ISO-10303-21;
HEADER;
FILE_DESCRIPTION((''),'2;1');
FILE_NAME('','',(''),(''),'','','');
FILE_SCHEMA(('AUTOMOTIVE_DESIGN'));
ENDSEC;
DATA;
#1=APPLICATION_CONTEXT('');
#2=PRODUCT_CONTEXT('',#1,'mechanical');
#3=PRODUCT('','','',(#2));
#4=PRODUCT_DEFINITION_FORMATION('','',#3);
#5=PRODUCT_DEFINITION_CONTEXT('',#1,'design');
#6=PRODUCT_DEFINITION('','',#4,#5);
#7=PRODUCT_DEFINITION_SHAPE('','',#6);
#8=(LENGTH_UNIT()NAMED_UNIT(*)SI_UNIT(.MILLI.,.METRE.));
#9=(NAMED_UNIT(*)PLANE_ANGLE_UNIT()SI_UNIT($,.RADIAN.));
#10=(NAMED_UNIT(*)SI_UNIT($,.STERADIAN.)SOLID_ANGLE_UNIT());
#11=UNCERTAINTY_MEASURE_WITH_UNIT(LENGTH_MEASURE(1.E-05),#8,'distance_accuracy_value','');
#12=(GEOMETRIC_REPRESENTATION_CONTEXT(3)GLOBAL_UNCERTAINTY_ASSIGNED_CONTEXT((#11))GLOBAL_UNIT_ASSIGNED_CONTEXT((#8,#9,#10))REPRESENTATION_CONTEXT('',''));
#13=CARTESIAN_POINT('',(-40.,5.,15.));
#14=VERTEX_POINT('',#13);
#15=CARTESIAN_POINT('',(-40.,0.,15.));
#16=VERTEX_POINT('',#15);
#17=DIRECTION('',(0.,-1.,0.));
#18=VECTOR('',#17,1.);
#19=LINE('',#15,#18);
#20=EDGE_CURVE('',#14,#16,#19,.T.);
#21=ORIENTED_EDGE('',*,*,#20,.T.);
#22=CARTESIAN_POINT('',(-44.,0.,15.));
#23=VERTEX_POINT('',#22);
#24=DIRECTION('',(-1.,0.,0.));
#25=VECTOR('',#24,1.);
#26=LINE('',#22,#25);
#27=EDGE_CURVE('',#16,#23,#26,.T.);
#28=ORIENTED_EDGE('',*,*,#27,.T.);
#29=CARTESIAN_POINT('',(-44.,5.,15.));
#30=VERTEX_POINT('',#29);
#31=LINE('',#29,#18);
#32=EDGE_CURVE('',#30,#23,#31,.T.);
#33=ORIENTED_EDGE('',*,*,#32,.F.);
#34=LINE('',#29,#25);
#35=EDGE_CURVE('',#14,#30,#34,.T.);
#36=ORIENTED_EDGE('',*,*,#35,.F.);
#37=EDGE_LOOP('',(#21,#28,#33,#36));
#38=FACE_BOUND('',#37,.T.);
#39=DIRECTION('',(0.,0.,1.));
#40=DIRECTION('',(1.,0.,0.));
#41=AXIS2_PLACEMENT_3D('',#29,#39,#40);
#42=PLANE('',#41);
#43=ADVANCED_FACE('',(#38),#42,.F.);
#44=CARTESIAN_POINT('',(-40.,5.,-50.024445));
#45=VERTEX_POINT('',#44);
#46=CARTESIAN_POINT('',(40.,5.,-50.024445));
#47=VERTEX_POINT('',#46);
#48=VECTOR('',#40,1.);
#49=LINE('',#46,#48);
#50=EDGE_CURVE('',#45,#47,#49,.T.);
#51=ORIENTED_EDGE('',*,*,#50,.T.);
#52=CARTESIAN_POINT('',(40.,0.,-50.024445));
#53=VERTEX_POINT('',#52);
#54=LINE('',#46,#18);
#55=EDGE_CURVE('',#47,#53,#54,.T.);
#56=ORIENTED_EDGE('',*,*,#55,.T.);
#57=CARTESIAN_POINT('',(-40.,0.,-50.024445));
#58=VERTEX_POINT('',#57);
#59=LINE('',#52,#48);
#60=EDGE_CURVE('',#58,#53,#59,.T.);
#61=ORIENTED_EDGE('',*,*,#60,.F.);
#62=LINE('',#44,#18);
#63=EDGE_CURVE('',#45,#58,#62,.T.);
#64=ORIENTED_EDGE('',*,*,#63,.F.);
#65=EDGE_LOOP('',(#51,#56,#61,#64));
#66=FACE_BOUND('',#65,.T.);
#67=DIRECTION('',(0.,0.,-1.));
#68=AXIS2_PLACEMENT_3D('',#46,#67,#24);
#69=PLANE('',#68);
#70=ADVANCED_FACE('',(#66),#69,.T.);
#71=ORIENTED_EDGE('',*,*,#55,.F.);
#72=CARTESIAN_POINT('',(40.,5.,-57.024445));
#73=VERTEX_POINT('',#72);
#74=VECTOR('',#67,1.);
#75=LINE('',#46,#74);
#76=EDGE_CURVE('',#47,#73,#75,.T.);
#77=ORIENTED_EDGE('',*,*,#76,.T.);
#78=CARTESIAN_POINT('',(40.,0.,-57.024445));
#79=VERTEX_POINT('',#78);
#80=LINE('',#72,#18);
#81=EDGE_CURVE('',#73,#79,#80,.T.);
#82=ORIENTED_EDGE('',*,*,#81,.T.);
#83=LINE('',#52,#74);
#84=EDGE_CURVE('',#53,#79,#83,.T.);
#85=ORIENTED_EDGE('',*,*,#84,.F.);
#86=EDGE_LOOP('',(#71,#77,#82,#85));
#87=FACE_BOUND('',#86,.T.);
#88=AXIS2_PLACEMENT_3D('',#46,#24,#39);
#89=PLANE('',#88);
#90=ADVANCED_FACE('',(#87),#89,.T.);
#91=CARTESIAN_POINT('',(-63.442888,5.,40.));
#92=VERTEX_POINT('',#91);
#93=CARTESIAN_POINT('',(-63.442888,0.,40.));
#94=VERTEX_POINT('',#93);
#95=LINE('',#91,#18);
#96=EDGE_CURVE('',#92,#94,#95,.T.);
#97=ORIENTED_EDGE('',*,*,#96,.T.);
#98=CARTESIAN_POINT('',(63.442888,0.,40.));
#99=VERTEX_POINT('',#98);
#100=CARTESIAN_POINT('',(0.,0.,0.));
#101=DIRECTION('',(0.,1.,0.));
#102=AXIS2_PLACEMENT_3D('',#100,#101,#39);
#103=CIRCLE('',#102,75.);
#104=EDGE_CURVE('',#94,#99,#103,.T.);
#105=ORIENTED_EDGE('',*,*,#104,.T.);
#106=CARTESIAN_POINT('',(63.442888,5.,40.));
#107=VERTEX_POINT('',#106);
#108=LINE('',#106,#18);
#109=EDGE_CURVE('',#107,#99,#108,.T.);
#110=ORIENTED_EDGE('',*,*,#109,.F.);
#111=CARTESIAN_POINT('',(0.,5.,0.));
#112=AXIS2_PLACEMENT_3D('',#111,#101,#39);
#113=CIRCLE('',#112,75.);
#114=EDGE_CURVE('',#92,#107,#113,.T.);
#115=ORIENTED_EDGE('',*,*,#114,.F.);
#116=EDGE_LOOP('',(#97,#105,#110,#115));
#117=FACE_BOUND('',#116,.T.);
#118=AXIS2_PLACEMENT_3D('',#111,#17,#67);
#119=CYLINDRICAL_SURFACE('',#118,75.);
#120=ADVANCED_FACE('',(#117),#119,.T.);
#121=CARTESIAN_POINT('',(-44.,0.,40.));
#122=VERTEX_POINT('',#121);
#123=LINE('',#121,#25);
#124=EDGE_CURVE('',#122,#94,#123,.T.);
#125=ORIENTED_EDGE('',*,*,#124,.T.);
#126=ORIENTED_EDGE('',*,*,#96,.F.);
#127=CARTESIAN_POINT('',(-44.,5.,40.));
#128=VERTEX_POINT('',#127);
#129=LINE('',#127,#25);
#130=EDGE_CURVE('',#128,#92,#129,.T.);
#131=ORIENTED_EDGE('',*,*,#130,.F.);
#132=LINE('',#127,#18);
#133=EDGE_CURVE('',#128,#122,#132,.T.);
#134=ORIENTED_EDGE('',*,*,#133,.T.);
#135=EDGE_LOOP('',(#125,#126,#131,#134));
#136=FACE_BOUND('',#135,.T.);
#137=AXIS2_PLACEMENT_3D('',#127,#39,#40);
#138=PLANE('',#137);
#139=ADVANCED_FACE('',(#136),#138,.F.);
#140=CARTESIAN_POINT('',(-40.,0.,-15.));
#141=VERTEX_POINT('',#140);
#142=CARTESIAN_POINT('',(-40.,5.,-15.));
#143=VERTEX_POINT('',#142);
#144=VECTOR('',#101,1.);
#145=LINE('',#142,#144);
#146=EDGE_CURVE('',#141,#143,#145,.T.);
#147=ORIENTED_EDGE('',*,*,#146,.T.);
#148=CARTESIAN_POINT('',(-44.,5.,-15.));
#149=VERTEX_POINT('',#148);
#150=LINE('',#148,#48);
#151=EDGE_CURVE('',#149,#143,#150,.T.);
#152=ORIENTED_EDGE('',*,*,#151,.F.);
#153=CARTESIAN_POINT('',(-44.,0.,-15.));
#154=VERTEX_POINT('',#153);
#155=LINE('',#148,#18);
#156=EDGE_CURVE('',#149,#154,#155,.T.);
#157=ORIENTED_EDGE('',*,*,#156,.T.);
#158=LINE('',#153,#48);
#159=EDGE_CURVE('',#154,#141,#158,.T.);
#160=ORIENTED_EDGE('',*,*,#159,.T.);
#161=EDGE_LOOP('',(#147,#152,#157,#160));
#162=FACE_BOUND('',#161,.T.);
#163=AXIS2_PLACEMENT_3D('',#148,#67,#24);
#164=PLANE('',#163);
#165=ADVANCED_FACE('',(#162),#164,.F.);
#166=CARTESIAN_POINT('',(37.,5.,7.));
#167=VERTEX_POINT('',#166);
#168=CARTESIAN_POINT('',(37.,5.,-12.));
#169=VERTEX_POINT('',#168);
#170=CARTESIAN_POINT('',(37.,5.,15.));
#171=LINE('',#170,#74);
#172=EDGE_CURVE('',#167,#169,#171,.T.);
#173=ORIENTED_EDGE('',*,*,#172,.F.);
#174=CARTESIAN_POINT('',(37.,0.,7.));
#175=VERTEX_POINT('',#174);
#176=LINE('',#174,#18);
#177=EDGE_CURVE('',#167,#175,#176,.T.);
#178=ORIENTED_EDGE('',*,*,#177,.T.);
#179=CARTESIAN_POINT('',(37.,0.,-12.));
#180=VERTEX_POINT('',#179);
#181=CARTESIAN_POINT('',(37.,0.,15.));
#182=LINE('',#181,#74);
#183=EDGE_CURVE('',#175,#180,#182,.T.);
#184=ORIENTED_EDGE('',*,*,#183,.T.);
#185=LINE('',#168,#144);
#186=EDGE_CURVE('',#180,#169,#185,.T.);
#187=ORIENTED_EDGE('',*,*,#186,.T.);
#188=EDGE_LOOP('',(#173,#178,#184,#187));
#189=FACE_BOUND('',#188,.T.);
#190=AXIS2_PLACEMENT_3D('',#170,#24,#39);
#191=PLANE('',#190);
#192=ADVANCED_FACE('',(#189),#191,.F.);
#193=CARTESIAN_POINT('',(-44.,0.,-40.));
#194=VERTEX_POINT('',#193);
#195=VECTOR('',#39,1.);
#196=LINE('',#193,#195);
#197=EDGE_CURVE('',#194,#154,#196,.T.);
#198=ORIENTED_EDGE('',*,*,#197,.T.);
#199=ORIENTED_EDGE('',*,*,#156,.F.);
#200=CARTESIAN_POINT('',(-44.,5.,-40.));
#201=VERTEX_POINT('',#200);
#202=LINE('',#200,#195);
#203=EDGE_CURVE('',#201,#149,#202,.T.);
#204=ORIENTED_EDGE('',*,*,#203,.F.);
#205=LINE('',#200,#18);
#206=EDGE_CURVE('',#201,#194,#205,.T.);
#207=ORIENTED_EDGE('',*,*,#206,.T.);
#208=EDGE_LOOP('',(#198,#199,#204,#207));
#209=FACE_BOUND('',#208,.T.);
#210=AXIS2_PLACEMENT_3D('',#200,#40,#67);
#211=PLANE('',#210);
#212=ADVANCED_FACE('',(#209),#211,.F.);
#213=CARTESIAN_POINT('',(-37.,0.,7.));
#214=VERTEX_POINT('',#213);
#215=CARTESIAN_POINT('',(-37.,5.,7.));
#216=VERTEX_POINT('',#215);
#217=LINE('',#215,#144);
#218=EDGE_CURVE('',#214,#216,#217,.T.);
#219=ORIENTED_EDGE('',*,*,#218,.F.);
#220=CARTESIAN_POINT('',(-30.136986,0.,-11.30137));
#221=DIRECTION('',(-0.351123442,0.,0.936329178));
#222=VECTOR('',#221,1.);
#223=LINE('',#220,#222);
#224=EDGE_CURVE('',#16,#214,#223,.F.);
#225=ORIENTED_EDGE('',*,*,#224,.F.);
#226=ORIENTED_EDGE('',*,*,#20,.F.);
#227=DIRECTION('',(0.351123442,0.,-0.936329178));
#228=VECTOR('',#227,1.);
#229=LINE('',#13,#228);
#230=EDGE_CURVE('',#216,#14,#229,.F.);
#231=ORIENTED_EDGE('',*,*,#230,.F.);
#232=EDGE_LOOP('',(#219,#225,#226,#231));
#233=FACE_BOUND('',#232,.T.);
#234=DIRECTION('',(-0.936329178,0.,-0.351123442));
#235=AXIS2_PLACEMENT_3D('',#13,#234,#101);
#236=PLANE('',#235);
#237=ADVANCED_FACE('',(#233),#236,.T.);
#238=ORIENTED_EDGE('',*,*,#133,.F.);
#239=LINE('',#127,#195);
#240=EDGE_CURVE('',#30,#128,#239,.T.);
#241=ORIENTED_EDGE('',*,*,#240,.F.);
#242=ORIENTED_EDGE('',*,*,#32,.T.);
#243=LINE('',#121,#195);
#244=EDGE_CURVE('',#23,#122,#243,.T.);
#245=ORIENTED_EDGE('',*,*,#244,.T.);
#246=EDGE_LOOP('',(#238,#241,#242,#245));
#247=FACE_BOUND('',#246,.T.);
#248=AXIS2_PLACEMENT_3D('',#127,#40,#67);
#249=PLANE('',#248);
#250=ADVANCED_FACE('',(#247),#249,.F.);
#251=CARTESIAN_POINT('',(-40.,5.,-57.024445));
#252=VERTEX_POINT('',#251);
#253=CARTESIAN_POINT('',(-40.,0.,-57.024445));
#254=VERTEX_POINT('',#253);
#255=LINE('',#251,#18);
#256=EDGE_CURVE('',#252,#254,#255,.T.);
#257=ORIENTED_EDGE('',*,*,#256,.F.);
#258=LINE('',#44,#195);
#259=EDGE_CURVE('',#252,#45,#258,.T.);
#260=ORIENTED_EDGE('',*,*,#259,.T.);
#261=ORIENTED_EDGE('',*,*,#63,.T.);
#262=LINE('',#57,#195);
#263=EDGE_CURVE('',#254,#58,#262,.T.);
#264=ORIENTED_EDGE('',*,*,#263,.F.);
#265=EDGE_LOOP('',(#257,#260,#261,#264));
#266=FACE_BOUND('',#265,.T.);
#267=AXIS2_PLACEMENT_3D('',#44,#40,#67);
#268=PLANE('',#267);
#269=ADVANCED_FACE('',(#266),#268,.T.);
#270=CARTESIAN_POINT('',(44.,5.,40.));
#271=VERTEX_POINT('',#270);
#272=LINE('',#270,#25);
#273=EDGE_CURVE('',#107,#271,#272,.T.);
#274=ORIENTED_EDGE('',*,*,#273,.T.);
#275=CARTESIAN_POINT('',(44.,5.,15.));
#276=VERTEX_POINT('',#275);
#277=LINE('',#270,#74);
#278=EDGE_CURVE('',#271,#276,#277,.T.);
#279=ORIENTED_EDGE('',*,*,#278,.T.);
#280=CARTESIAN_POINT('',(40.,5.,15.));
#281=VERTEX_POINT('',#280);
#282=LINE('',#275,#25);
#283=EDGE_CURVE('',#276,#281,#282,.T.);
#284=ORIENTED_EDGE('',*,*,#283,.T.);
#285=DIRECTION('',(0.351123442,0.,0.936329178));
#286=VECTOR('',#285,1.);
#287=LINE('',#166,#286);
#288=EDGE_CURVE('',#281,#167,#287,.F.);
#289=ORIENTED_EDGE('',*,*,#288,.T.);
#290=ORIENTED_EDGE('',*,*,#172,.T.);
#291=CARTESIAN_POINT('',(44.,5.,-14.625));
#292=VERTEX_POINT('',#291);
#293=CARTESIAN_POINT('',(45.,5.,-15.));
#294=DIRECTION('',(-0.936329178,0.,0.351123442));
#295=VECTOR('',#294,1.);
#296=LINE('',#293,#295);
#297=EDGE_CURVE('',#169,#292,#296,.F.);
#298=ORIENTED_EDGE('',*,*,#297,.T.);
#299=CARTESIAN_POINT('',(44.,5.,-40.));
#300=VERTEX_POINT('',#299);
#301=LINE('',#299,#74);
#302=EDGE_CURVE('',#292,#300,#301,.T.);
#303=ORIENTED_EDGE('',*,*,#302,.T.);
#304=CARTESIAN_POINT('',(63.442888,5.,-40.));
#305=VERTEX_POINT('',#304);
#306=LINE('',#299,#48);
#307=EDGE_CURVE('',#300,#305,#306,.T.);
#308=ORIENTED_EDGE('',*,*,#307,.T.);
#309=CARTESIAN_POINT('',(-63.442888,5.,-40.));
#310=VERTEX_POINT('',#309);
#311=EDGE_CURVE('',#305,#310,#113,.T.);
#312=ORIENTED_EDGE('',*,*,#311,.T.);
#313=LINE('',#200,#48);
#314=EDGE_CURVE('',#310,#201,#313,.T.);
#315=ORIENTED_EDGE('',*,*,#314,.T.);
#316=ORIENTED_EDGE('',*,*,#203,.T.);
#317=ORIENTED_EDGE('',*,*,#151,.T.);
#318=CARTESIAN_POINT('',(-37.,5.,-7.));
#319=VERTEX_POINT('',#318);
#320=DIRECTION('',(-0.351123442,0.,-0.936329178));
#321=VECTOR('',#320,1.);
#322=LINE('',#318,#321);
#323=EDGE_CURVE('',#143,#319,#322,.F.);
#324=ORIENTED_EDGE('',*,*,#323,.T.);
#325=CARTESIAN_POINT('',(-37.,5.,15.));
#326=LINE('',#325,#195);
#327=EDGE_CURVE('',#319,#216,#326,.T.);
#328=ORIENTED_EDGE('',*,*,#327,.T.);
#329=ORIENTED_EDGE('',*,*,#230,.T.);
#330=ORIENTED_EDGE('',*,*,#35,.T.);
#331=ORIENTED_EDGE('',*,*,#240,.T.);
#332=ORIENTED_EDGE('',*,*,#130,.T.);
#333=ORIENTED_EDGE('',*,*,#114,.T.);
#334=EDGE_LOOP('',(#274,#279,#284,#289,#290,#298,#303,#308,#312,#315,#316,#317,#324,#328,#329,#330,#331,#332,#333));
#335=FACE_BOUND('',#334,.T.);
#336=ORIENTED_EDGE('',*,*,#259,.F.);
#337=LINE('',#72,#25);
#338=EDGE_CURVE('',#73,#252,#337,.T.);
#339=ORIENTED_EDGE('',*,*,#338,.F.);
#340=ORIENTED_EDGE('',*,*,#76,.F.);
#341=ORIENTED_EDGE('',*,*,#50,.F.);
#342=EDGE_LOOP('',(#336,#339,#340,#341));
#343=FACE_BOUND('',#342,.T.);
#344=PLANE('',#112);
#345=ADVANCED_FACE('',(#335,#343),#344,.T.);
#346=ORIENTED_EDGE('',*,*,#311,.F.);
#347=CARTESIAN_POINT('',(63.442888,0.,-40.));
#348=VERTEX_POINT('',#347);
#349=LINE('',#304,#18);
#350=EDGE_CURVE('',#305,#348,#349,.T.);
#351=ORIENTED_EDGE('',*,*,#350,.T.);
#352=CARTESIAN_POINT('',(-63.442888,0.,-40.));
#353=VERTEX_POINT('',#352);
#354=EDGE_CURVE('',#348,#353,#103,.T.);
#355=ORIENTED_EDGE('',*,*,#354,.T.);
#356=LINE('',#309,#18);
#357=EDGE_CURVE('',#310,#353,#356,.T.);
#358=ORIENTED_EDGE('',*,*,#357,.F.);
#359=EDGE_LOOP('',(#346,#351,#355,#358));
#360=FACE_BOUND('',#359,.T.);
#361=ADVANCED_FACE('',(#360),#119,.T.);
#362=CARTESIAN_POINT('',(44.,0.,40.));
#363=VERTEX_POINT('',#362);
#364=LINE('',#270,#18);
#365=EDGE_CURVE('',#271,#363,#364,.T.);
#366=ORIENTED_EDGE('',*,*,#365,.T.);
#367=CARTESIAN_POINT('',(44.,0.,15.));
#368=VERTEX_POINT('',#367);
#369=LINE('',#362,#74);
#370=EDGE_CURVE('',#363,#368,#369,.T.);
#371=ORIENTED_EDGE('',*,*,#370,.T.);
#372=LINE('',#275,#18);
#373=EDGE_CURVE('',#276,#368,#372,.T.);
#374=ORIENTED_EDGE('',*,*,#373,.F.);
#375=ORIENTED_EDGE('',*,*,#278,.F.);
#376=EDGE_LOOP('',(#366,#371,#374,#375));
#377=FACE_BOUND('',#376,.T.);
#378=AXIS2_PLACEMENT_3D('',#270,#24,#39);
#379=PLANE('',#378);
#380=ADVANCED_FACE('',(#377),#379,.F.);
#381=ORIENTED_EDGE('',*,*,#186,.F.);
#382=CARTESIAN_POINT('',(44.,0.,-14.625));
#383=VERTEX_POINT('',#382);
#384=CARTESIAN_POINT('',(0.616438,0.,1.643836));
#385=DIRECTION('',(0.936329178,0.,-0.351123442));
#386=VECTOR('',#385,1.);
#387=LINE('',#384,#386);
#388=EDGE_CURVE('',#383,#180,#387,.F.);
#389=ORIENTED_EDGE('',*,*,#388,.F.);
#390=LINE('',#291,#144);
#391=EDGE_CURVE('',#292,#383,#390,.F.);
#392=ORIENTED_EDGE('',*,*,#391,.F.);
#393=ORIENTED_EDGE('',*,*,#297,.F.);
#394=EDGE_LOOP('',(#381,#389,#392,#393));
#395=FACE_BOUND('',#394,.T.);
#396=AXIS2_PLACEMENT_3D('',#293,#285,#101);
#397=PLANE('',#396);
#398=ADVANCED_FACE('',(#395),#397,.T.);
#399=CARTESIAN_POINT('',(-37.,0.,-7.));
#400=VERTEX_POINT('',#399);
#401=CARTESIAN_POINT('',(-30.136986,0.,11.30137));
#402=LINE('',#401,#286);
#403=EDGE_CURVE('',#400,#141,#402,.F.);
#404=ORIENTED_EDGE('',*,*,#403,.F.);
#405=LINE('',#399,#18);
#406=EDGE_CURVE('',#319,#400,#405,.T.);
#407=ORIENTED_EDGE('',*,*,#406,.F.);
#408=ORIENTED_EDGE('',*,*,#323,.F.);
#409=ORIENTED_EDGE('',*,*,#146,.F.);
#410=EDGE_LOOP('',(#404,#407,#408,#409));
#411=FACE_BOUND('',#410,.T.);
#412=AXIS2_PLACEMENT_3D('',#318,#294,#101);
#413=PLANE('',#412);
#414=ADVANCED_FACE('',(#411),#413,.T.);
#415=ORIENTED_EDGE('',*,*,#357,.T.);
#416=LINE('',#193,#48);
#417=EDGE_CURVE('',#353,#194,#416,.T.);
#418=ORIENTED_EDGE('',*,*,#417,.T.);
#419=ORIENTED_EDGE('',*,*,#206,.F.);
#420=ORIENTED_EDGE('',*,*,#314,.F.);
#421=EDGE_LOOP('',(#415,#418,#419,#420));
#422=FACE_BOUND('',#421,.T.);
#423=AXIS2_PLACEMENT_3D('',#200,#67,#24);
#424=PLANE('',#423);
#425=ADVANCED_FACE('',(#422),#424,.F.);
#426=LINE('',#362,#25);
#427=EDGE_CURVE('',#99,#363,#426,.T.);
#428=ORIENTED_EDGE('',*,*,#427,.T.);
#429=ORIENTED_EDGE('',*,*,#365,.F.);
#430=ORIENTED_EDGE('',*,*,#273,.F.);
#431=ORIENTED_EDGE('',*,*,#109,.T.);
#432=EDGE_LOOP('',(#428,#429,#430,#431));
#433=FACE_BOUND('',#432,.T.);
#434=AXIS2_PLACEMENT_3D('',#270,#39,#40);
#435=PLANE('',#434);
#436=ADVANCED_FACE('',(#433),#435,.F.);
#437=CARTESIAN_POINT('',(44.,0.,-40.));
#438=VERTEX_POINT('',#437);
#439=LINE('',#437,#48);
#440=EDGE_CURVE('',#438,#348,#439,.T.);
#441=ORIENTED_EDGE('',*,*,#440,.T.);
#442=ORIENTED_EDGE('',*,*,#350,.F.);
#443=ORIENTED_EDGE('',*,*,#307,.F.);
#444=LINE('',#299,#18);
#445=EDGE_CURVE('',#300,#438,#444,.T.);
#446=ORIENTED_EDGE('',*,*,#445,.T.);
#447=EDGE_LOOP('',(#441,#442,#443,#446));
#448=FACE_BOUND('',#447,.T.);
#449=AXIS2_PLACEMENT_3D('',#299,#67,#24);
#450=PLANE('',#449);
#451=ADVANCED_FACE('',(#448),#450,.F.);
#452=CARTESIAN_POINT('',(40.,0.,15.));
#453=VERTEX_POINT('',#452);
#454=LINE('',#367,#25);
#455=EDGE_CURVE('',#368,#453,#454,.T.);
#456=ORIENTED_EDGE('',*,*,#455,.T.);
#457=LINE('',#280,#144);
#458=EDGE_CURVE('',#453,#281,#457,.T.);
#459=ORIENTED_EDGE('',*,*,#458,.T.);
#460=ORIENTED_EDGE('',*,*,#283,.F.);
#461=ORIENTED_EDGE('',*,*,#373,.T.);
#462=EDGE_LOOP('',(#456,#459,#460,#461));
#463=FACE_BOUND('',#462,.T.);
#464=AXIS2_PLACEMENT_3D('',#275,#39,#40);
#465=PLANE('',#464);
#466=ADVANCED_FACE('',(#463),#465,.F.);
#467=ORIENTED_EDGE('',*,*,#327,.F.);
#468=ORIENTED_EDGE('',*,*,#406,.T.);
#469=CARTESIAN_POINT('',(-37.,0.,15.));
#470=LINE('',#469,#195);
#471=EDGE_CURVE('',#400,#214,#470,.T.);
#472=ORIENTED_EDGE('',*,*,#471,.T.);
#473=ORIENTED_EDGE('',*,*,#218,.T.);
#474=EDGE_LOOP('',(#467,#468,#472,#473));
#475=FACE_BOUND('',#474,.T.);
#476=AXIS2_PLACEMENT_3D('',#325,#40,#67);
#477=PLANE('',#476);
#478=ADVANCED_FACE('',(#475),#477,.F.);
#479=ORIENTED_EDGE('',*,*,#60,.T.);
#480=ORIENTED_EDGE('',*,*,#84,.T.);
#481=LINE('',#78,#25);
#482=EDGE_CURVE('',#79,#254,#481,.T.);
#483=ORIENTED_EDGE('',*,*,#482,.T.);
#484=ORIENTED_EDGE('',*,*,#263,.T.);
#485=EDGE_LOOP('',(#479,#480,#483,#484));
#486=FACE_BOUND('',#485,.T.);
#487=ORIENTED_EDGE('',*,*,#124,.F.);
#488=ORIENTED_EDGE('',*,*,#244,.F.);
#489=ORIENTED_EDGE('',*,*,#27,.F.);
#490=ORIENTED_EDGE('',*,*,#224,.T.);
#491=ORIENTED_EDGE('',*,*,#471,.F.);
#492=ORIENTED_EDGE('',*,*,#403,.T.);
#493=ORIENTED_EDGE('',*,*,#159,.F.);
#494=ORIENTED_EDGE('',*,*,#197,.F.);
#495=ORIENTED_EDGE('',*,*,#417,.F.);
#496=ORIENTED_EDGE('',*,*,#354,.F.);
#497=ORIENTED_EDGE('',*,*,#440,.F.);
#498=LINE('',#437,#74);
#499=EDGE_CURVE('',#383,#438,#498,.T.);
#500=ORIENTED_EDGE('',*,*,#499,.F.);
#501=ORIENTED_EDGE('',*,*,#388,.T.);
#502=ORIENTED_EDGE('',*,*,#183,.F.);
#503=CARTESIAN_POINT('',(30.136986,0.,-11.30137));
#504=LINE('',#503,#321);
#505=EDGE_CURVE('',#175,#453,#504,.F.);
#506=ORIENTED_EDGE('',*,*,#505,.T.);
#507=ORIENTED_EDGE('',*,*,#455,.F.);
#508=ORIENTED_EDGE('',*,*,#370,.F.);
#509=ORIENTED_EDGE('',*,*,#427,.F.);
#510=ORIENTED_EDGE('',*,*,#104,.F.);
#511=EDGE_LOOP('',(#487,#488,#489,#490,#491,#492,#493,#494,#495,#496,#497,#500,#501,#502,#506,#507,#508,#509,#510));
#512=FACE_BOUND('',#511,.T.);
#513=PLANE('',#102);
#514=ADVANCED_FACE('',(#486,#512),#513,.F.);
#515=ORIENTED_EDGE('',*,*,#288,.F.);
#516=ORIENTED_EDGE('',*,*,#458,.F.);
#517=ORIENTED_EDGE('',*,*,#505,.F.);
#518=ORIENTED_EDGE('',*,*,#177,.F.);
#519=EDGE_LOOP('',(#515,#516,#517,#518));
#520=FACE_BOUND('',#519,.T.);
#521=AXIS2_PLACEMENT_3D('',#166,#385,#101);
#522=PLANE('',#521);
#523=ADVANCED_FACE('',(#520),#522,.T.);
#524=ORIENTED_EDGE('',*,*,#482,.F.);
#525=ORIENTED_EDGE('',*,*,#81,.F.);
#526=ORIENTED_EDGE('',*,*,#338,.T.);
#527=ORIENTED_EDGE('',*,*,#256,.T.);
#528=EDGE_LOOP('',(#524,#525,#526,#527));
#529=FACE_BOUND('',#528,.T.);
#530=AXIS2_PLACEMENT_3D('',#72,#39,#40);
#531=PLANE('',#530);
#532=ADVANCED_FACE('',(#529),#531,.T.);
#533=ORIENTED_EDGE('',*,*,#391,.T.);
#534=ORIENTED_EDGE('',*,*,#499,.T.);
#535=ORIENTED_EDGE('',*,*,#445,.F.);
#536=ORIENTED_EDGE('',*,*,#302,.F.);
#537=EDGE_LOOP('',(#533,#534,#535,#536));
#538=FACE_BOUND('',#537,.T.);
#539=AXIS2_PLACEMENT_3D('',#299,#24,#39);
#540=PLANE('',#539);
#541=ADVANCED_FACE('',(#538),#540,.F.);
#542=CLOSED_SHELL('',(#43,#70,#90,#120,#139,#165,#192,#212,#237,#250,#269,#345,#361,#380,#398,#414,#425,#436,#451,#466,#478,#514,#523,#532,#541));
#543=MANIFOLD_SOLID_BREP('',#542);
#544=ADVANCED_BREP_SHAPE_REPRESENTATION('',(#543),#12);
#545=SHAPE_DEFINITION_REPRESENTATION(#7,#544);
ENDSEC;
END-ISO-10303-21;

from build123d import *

# Parameters (mm, degrees)
SKETCH1_W           = 80
SKETCH1_H           = 7
BOSS_EXTRUDE1_DEPTH = 5
CHAMFER1_SIZE       = 8
CHAMFER1_SIZE_2     = 3


with BuildPart() as part:
    # Sketch1 → Boss-Extrude1 (new body)
    with BuildSketch(Plane(origin=(0, 0, 0), x_dir=(1, 0, 0), z_dir=(0, 1, 0))):
        with BuildLine():
            Line((-44, -40), (-44, -15))
            Line((-44, -15), (-37, -15))
            Line((-37, -15), (-37, 15))
            Line((-37, 15), (-44, 15))
            Line((-44, 15), (-44, 40))
            Line((-44, 40), (-63.442887702, 40))
            ThreePointArc((-63.442887702, 40), (0, 75), (63.442887702, 40))
            Line((63.442887702, 40), (44, 40))
            Line((44, 40), (44, 15))
            Line((44, 15), (37, 15))
            Line((37, 15), (37, -15))
            Line((37, -15), (44, -15))
            Line((44, -15), (44, -40))
            Line((44, -40), (63.442887702, -40))
            ThreePointArc((63.442887702, -40), (0, -75), (-63.442887702, -40))
            Line((-63.442887702, -40), (-44, -40))
        make_face()
        with Locations((0, 53.524444958)):
            Rectangle(SKETCH1_W, SKETCH1_H, mode=Mode.SUBTRACT)
    extrude(amount=BOSS_EXTRUDE1_DEPTH)

    # Chamfer1
    # the kernel refuses this chamfer: 8, 3 mm, written as the material it adds along each edge
    with BuildSketch(Plane(origin=(37, 0, 15), x_dir=(-0.013536660009854304, 0, -0.9999083752203387), z_dir=(0, 1, 0)), Plane(origin=(-37, 0, -15), x_dir=(0.013536660009854304, 0, 0.9999083752203387), z_dir=(0, 1, 0))) as chamfer1_piece_1:
        Polygon((CHAMFER1_SIZE * 0.99990837522, -CHAMFER1_SIZE * 0.0135366600099), (-CHAMFER1_SIZE_2 * 0.0135366600099, -CHAMFER1_SIZE_2 * 0.99990837522), (0, 0), align=None)
    extrude(amount=5)
    with BuildSketch(Plane(origin=(37, 0, -15), x_dir=(0.9999083752203387, 0, -0.013536660009854514), z_dir=(0, 1, 0))) as chamfer1_piece_2_section:
        Polygon((CHAMFER1_SIZE * 0.99990837522, -CHAMFER1_SIZE * 0.0135366600099), (-CHAMFER1_SIZE_2 * 0.0135366600099, -CHAMFER1_SIZE_2 * 0.99990837522), (0, 0), align=None)
    chamfer1_piece_2 = extrude(amount=5, mode=Mode.PRIVATE)
    chamfer1_piece_2 = split(chamfer1_piece_2, bisect_by=Plane(origin=(44, 2.5, -14.03968053), z_dir=(-1, 0, 0)), keep=Keep.TOP, mode=Mode.PRIVATE)
    add(chamfer1_piece_2)
    with BuildSketch(Plane(origin=(-37, 0, 15), x_dir=(-0.9953980532473654, 0, 0.09582648689874379), z_dir=(0, 1, 0))) as chamfer1_piece_3:
        Polygon((CHAMFER1_SIZE_2 * 0.995398053247, -CHAMFER1_SIZE_2 * 0.0958264868987), (-CHAMFER1_SIZE * 0.0958264868987, -CHAMFER1_SIZE * 0.995398053247), (0, 0), align=None)
    extrude(amount=5)


solid = part.part
